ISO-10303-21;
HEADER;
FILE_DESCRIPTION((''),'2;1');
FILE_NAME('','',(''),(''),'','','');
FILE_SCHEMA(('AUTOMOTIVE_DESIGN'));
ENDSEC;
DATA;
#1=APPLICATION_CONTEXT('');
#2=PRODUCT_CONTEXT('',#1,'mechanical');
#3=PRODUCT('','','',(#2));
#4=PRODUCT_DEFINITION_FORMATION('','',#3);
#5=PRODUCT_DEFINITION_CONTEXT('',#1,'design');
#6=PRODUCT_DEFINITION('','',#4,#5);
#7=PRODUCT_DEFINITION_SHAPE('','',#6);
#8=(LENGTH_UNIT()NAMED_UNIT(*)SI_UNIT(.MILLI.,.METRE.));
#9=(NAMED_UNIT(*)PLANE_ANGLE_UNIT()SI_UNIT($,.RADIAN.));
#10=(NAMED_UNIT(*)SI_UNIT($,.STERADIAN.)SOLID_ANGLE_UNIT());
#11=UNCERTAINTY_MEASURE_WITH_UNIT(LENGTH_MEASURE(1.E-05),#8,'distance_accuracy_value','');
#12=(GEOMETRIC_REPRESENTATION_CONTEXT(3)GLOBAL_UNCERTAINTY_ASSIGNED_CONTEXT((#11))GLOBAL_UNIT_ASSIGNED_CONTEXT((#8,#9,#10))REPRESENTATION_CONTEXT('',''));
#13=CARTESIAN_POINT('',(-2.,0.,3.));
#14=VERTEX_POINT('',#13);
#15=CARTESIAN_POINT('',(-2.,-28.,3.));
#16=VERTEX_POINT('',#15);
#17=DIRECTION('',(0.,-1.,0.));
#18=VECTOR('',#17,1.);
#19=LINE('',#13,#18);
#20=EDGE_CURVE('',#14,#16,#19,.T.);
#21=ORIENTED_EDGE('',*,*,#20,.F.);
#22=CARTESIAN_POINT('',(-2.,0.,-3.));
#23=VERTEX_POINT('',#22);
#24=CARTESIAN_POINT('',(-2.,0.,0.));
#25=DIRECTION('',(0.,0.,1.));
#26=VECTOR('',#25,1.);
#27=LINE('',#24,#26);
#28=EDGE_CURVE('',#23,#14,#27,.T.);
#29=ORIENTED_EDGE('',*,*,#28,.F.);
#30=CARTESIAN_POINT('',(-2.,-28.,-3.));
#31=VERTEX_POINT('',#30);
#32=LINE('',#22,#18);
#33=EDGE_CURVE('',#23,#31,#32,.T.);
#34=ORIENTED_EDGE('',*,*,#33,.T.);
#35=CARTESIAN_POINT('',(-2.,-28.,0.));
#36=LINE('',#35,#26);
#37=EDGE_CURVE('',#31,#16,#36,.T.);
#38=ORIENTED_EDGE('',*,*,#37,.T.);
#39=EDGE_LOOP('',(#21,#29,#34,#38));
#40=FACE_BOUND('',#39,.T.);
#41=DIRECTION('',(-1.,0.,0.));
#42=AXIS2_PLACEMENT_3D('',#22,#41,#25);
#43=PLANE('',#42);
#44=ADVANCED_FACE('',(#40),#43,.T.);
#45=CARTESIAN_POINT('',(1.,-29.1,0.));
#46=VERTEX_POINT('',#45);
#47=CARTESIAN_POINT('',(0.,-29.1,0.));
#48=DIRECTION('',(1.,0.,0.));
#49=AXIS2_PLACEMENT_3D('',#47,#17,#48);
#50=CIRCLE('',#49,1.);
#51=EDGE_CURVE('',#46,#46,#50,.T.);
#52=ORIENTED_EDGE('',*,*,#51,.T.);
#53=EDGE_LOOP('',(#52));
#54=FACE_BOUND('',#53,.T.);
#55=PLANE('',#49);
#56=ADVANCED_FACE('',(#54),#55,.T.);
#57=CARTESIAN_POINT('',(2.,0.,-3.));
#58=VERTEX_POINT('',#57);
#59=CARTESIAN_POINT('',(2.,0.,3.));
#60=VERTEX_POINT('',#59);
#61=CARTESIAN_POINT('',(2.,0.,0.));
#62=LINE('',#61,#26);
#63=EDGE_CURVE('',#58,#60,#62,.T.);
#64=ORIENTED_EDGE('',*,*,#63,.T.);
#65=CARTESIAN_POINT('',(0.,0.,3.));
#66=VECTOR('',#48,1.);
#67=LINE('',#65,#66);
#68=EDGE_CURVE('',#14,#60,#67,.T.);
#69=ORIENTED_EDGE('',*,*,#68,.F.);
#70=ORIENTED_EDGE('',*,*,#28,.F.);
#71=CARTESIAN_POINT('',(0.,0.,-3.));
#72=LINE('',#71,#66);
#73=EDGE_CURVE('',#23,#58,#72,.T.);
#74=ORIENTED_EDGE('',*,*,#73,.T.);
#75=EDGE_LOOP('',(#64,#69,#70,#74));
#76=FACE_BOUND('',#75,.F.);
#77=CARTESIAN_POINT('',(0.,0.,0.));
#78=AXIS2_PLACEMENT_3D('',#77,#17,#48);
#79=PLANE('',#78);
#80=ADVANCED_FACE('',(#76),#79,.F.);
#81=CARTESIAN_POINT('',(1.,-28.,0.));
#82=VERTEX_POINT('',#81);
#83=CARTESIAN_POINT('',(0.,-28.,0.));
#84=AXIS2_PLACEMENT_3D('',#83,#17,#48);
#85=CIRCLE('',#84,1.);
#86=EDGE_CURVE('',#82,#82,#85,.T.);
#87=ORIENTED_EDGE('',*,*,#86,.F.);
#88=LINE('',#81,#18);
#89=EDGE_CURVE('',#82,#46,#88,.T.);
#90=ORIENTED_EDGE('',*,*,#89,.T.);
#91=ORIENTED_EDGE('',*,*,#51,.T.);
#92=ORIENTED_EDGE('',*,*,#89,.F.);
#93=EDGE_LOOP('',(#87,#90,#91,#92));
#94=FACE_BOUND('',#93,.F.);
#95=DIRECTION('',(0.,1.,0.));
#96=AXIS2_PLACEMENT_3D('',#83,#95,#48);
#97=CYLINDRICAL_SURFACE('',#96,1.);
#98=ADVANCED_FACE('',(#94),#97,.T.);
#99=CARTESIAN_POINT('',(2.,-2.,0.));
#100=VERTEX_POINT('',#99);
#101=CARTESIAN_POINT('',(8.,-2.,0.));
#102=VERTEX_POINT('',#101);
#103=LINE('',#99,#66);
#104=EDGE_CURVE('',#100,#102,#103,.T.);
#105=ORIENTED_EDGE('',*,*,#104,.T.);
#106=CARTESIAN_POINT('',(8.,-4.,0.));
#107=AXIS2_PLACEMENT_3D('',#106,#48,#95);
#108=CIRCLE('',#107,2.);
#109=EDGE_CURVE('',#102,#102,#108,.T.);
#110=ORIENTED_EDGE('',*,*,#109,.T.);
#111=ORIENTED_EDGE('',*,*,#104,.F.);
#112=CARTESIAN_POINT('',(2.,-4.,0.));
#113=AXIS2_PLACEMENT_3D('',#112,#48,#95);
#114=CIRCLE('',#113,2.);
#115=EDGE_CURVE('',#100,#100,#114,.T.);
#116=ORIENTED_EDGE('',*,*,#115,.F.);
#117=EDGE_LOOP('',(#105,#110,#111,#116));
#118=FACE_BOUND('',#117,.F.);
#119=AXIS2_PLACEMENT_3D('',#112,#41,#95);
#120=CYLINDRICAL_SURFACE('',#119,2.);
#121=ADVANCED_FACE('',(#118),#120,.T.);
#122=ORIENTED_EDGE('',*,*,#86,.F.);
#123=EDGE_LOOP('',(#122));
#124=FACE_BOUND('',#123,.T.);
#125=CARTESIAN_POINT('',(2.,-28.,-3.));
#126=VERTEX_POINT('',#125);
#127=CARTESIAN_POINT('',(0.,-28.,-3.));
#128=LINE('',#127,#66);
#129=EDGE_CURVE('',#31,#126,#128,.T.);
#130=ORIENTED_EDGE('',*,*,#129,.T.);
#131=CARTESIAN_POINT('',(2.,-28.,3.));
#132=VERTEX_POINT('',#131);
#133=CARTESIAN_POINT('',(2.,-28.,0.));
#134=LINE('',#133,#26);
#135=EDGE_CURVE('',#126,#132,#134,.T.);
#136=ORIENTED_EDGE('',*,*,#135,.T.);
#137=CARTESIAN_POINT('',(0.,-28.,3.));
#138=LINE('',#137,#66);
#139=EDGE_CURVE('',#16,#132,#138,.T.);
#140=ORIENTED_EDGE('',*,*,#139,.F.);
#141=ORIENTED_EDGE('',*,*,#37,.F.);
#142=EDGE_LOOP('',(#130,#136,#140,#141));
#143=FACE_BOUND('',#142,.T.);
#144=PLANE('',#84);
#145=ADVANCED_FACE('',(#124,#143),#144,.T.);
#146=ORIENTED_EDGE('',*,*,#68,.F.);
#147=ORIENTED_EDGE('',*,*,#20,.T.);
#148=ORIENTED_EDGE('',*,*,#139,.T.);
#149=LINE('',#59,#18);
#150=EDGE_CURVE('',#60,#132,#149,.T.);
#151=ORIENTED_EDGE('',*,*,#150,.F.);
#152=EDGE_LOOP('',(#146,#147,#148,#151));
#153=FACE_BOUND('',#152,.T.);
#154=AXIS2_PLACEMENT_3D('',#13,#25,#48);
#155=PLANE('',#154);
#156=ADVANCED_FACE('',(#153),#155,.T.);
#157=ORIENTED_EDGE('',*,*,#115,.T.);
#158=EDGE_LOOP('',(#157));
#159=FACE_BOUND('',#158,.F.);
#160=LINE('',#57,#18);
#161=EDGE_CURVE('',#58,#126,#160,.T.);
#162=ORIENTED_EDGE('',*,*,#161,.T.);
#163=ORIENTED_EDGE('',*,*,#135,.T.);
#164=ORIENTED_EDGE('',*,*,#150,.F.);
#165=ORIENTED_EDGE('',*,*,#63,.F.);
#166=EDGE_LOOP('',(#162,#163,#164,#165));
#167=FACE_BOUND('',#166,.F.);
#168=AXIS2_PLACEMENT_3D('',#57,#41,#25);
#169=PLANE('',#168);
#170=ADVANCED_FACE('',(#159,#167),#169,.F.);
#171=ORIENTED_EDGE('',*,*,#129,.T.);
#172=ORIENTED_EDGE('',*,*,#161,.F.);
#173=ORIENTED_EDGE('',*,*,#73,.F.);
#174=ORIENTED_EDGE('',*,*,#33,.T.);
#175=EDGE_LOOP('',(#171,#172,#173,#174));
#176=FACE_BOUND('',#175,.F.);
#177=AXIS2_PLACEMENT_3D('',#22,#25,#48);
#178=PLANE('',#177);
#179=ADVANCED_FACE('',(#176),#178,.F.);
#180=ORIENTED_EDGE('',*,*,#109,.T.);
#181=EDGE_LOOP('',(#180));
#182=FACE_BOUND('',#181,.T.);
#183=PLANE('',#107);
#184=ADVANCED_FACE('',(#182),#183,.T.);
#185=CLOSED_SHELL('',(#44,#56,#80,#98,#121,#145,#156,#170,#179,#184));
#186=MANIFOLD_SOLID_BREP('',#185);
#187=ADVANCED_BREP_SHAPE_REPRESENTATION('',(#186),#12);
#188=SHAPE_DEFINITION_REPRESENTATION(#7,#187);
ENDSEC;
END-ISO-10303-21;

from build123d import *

# Parameters (mm, degrees)
F0_W     = 4
F0_H     = 6
F1_DEPTH = 28
F2_R     = 2
F3_DEPTH = 6
F4_R     = 1
F5_DEPTH = 1.1


# Not quite as in the source:
# - a feature names something its author has since deleted; it is built from what else it names


with BuildPart() as f1:
    # F0 (on Front) → F1 (new body)
    with BuildSketch(Plane.XZ):
        Rectangle(F0_W, F0_H)
    extrude(amount=F1_DEPTH)

    # F2 (on face) → F3 (join)
    with BuildSketch(Plane.YZ.offset(2)):
        with Locations((-4, 0)):
            Circle(F2_R)
    extrude(amount=F3_DEPTH)

    # F4 (on face) → F5 (join)
    with BuildSketch(Plane.XZ.offset(28)):
        Circle(F4_R)
    extrude(amount=F5_DEPTH)


solid = f1.part
